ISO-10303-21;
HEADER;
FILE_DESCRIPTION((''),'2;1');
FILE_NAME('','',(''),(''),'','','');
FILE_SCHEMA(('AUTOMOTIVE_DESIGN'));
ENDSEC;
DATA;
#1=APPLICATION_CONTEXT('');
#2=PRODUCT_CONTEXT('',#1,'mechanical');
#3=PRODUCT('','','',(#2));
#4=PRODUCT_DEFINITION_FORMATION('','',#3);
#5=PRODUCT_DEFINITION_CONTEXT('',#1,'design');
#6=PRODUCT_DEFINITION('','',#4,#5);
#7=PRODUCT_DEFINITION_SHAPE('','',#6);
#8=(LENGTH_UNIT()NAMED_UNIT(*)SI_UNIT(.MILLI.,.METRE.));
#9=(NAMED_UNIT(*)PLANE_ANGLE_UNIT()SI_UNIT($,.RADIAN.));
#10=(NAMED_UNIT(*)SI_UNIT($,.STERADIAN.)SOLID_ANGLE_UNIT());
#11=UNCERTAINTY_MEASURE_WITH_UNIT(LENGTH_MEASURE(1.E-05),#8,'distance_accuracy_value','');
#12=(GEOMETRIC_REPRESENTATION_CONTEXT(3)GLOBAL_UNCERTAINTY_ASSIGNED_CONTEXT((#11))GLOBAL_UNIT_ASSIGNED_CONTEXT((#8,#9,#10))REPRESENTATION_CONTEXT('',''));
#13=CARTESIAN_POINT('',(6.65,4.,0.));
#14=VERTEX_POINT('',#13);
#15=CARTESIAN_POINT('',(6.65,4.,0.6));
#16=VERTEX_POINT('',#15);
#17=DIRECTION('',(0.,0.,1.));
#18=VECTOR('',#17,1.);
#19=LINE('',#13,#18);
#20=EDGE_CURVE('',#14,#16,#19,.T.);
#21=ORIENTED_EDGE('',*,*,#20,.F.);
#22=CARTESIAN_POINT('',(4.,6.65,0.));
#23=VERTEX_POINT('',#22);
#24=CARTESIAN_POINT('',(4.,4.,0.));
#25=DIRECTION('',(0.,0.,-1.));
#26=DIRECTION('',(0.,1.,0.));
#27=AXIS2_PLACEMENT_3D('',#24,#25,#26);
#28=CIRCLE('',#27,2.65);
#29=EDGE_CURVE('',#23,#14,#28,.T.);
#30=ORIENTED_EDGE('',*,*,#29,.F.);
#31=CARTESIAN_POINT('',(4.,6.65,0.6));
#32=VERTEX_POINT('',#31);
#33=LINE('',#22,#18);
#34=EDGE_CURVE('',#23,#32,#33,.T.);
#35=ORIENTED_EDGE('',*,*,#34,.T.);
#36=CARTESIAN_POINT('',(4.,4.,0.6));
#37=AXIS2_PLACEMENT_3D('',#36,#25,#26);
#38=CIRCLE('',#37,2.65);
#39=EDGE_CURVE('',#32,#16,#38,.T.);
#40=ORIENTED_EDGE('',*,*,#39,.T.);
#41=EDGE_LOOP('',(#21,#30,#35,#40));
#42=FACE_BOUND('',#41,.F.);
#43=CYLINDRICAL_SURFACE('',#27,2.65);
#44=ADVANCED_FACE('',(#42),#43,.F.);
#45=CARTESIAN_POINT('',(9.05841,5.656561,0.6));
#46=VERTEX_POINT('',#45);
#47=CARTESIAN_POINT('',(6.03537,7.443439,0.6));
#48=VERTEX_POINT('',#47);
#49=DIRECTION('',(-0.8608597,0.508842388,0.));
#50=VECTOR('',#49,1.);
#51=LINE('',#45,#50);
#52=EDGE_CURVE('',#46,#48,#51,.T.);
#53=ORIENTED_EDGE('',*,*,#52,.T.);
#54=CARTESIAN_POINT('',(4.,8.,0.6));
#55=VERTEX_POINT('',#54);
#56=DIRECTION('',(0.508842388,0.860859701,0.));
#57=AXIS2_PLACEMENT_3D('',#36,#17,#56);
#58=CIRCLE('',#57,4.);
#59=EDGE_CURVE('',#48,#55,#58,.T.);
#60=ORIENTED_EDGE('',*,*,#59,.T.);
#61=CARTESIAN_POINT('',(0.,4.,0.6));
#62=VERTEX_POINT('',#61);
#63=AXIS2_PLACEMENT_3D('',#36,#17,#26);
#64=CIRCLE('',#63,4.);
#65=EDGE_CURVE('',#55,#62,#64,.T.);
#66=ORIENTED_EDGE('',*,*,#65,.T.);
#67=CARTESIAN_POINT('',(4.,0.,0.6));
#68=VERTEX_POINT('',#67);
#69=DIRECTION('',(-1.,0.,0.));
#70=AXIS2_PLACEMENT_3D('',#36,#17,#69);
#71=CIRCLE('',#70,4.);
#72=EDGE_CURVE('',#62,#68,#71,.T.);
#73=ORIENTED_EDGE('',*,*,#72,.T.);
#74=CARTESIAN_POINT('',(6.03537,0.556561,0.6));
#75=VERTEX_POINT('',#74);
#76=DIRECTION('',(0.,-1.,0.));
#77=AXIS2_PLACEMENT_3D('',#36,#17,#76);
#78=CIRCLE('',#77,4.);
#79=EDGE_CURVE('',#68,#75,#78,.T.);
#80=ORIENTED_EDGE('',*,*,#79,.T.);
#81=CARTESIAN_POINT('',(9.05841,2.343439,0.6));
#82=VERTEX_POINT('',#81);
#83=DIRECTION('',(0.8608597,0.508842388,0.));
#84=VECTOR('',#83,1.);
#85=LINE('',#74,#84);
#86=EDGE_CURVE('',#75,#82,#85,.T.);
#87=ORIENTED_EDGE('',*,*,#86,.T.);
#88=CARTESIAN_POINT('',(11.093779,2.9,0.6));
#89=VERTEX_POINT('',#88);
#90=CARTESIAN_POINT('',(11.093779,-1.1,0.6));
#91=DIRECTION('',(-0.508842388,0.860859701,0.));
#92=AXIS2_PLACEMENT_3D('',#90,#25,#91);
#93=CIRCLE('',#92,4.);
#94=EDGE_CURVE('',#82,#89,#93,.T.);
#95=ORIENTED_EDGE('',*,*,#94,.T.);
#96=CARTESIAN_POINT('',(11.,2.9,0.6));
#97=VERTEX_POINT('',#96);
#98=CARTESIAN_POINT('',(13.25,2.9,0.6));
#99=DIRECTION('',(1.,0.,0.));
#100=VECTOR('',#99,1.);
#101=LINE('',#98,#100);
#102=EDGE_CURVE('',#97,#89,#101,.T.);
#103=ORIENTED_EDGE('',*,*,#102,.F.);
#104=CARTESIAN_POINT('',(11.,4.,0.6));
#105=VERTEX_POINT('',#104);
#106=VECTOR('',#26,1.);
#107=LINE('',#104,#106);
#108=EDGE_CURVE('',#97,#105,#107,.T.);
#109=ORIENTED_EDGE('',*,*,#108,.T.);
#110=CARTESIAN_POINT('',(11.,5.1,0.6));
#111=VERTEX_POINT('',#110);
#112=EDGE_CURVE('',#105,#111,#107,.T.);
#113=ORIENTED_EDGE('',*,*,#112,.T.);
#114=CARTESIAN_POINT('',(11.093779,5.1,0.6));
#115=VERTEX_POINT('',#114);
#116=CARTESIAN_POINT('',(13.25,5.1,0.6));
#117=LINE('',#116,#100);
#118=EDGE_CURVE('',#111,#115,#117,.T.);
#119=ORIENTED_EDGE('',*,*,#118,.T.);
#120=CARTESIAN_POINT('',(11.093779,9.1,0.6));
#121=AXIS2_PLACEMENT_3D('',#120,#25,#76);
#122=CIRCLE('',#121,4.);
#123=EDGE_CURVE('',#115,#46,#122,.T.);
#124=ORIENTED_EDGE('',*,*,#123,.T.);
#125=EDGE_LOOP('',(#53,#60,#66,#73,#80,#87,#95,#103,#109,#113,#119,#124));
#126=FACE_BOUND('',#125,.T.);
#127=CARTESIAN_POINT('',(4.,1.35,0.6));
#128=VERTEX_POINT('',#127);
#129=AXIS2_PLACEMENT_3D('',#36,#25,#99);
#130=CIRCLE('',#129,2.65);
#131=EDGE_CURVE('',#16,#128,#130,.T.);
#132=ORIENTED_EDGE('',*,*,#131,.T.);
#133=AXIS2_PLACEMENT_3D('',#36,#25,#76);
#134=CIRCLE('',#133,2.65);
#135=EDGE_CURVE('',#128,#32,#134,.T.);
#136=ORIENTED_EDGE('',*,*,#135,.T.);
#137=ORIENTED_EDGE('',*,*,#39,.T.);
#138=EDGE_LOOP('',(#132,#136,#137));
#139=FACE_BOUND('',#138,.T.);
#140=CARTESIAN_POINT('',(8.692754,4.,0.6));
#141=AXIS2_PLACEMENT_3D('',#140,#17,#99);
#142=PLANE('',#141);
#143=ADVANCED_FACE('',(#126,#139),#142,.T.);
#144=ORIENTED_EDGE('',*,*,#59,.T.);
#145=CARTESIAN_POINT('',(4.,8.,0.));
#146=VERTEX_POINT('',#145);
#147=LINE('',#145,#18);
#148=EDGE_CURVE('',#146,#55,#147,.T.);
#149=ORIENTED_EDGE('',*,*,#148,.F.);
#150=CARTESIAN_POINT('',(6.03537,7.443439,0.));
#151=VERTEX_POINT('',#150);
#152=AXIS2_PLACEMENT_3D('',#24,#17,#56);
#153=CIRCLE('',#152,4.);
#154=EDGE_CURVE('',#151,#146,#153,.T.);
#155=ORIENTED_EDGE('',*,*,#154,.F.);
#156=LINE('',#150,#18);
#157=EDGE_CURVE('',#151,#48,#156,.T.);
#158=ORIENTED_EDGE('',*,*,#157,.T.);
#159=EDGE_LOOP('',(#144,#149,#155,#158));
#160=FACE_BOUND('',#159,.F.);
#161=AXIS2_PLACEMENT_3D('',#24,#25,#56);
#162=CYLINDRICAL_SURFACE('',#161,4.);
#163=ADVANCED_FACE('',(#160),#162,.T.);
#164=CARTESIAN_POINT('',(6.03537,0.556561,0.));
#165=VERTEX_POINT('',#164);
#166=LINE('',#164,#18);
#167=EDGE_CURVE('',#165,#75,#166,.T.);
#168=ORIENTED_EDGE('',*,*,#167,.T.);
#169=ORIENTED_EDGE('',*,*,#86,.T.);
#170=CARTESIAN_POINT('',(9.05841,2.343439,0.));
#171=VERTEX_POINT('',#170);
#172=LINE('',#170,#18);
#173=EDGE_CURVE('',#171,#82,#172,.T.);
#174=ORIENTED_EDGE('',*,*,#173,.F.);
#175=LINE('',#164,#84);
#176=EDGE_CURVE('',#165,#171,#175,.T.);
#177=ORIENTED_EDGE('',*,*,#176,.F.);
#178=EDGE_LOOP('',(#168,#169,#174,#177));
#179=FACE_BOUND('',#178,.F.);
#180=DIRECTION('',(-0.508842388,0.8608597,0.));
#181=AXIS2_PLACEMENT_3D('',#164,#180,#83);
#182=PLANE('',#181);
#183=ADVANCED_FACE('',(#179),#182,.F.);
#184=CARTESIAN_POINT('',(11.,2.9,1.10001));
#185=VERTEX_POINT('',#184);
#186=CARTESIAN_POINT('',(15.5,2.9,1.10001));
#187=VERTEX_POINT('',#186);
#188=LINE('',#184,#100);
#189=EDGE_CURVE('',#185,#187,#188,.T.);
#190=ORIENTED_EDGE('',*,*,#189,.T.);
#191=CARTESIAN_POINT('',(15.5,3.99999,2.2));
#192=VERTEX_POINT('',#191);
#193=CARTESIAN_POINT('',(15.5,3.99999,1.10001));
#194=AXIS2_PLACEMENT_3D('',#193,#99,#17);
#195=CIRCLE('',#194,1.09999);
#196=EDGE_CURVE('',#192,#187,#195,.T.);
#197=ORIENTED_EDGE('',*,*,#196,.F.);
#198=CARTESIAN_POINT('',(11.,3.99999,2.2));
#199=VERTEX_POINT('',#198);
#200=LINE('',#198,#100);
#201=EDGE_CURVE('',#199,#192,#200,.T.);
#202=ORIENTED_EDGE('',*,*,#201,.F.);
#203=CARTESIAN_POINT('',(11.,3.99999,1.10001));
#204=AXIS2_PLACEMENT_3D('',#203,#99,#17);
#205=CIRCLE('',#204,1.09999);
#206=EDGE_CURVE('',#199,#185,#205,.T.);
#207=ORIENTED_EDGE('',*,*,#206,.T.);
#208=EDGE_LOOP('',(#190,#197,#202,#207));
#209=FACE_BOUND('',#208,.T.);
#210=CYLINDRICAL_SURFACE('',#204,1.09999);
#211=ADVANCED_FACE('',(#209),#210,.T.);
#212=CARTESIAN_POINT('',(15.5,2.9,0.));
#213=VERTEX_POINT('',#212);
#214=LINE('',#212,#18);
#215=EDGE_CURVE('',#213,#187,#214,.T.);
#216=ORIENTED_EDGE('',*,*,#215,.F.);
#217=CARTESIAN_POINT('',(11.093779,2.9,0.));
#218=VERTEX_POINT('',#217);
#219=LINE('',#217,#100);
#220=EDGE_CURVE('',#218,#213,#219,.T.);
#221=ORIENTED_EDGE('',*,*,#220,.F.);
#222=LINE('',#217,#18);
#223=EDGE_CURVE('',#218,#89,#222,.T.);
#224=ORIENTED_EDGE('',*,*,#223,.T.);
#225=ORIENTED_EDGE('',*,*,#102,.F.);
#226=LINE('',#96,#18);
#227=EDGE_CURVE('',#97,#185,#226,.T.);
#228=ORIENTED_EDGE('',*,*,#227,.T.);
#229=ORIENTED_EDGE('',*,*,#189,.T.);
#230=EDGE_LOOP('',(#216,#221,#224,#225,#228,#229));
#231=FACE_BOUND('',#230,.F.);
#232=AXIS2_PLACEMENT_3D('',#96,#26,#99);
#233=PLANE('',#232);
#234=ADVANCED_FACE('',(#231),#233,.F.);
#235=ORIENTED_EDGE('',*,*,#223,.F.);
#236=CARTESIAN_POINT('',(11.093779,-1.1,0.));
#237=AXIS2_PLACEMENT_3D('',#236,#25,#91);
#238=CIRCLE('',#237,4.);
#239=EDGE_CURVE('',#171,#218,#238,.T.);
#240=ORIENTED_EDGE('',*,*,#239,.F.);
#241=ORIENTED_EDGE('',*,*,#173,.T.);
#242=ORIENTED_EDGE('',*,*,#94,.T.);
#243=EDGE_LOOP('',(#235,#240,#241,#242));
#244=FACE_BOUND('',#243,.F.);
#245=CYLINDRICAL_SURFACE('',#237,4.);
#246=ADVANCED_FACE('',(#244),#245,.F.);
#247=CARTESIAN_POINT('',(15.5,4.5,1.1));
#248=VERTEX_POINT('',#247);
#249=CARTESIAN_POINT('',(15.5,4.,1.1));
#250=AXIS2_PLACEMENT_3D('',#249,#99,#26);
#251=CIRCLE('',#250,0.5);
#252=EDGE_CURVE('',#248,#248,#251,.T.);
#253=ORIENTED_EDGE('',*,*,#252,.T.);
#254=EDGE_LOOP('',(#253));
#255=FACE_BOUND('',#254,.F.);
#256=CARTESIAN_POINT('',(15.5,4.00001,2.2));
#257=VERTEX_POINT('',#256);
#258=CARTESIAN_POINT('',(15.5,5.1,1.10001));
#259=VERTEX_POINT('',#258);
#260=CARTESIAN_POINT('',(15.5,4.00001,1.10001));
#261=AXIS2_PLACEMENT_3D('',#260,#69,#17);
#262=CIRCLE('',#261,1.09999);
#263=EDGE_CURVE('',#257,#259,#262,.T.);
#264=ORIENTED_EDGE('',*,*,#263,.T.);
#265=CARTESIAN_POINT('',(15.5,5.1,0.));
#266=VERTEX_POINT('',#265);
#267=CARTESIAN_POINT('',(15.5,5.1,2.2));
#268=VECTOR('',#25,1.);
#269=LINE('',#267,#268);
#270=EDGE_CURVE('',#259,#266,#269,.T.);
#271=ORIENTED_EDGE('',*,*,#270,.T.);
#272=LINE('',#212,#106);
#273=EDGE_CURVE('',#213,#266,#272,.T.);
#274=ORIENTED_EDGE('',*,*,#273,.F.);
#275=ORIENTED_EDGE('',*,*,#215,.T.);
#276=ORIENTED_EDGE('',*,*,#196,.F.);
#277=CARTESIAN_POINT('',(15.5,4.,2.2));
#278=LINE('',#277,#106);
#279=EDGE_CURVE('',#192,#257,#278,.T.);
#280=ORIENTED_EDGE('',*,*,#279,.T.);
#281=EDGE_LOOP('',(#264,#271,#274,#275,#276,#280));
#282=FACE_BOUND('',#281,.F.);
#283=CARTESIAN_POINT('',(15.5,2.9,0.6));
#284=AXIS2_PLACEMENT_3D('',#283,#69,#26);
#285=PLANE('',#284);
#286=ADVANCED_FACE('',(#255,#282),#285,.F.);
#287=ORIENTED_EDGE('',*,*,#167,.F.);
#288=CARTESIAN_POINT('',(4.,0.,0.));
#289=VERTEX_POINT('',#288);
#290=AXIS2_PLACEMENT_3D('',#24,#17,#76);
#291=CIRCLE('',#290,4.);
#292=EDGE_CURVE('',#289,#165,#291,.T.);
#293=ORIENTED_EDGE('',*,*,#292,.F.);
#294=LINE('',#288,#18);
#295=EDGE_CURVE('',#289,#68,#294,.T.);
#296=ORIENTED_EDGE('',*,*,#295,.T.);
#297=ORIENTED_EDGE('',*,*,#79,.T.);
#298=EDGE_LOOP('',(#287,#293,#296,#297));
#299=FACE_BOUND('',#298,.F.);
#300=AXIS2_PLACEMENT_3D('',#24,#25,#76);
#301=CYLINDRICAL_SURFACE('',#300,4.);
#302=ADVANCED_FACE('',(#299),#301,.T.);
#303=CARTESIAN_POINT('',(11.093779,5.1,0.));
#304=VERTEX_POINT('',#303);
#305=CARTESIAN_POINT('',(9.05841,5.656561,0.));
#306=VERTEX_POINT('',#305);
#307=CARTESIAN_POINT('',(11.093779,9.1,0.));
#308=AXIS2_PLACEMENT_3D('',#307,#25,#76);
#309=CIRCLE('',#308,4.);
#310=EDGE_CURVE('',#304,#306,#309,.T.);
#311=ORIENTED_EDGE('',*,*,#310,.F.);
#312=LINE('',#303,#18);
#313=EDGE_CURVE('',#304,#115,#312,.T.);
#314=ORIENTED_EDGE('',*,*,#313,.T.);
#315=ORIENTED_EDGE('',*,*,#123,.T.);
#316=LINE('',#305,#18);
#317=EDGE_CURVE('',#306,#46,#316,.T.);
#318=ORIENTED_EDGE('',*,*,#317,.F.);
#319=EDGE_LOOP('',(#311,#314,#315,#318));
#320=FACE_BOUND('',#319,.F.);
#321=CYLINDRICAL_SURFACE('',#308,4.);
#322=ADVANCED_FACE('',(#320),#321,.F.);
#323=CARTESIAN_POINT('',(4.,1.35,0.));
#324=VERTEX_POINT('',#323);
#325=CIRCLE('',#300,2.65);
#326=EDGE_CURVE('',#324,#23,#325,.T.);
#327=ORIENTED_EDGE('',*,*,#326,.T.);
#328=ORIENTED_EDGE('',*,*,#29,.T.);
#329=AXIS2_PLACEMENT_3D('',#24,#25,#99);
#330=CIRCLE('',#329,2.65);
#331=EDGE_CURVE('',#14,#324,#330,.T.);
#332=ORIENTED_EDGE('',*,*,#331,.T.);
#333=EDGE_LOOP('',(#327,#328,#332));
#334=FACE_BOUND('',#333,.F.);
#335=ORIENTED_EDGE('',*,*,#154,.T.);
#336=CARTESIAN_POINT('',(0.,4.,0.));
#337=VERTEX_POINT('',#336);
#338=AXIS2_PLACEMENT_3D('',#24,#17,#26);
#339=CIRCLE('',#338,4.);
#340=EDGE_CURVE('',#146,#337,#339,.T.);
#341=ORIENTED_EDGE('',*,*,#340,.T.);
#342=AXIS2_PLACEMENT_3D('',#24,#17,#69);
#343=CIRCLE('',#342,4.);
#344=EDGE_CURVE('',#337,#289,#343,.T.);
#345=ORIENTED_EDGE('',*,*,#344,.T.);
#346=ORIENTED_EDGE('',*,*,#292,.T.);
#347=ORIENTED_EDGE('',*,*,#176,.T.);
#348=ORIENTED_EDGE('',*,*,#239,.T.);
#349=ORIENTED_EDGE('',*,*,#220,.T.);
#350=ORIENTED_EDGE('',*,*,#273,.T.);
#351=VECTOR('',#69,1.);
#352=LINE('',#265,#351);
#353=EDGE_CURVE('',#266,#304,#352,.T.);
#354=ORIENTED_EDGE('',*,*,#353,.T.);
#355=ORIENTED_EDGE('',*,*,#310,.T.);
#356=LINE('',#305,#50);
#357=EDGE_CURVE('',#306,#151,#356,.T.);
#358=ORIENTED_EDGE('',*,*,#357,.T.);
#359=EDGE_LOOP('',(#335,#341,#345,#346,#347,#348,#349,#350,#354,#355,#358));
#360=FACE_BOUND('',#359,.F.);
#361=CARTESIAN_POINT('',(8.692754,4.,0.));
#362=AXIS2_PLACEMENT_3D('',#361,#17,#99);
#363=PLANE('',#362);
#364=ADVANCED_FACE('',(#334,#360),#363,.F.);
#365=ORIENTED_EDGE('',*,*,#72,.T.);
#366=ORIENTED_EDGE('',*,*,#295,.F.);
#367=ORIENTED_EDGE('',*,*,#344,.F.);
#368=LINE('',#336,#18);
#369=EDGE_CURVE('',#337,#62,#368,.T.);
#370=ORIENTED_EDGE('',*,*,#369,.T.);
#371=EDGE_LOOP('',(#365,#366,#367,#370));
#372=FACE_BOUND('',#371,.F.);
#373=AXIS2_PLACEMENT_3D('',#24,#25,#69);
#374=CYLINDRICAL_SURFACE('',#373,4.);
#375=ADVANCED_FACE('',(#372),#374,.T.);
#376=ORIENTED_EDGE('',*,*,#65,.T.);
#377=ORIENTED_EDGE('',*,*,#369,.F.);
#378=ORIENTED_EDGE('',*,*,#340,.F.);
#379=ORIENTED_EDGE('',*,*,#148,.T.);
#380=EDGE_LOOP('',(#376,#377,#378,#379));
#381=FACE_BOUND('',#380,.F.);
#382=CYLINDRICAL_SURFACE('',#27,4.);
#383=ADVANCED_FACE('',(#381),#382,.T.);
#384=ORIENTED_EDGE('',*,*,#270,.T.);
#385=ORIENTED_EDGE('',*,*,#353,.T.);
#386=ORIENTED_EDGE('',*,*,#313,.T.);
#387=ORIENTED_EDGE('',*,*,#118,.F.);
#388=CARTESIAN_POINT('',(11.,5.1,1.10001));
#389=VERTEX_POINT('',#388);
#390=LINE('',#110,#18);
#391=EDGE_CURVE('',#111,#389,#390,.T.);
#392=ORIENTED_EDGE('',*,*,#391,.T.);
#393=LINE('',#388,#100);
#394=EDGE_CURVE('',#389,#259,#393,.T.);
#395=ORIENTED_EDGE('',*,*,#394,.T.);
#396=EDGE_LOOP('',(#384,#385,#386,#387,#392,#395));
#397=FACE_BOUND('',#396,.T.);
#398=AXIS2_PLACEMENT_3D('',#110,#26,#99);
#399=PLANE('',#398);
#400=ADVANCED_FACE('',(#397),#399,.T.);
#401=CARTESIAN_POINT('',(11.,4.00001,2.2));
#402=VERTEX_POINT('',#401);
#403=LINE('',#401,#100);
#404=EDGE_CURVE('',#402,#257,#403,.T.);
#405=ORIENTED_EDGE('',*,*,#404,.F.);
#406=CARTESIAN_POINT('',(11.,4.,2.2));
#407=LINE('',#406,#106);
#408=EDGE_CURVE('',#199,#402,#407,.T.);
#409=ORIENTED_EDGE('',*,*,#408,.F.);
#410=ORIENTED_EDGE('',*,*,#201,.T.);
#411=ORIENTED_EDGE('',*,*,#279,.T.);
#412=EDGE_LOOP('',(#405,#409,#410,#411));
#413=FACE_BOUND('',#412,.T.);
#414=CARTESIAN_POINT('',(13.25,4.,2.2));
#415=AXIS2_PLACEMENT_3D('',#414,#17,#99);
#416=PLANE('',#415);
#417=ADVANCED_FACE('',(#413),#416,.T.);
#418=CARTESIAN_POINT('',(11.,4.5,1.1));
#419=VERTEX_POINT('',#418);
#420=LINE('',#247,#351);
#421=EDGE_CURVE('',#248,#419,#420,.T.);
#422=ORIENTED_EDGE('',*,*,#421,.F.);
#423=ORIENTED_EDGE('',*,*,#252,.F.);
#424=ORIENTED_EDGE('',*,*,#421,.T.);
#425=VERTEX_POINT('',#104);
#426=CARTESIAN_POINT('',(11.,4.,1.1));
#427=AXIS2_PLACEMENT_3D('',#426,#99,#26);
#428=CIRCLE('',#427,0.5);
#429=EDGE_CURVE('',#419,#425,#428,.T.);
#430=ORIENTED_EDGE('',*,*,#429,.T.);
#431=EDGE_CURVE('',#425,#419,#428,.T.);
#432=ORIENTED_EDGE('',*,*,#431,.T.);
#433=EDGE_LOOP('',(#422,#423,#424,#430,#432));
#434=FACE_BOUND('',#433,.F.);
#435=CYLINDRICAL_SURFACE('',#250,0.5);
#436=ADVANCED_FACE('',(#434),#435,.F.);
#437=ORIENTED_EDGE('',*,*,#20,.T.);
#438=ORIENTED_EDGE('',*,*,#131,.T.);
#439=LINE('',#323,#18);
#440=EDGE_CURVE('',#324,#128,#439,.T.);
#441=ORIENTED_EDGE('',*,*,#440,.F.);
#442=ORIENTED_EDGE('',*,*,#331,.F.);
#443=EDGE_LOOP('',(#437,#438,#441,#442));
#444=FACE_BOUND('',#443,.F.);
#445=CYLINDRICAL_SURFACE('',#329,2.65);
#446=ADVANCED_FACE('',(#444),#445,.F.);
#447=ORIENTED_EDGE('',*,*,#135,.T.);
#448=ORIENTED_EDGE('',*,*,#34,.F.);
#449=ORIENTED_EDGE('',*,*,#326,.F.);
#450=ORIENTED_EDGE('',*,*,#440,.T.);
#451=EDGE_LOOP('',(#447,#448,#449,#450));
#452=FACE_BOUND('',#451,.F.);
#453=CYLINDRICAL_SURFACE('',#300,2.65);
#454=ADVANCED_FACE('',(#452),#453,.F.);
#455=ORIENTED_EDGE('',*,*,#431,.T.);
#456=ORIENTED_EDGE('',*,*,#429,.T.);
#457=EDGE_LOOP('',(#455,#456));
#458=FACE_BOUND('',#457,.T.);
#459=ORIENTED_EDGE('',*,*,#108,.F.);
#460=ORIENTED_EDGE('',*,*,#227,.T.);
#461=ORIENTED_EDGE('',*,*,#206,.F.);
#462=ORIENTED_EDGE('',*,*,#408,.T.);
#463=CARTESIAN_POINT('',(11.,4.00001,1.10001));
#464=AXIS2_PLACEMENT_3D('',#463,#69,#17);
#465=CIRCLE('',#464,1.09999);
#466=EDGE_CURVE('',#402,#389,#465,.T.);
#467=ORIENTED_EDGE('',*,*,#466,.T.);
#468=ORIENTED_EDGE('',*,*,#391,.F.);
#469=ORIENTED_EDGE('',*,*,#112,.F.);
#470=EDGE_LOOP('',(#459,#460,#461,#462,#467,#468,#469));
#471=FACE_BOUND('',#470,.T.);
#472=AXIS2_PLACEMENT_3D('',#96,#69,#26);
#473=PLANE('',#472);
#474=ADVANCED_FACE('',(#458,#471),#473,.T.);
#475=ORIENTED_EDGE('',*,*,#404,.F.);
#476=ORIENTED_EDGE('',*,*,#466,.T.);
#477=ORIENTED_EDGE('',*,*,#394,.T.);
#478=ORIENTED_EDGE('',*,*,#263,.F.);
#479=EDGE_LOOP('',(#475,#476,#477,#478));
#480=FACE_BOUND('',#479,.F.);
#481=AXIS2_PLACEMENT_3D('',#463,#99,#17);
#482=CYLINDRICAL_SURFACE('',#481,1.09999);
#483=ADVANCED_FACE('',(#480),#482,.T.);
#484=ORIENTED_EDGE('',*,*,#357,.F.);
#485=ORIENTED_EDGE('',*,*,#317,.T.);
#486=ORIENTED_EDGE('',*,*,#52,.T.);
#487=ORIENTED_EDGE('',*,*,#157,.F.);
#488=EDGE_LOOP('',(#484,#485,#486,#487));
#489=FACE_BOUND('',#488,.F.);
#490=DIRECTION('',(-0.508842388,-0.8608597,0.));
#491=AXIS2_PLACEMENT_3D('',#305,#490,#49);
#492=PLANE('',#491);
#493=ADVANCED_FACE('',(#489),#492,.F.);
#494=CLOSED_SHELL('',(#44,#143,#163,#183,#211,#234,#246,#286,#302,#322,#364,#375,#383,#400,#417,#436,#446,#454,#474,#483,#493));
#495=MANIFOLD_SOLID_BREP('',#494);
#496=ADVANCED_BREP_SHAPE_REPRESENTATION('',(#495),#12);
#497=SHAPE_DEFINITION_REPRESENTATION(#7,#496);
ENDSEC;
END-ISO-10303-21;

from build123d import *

# Parameters (mm, degrees)
F1_DEPTH = 0.6
F2_W     = 4.5
F2_H     = 2.2
F3_DEPTH = 1.6
F4_R     = 1.09999
F5_R     = 0.5
F6_DEPTH = 25


# Not quite as in the source:
# - a fillet or chamfer is up to 0.001 mm smaller than in the source, because OpenCascade refuses the exact size


with BuildPart() as f1:
    # F0 (on Top) → F1 (new body)
    with BuildSketch(Plane.XY):
        with BuildLine():
            Line((11.0937791562, 2.9), (15.5, 2.9))
            Line((15.5, 2.9), (15.5, 5.1))
            Line((15.5, 5.1), (11.0937791562, 5.1))
            ThreePointArc((11.0937791562, 5.1), (10.0387329979, 5.2416483307), (9.0584096032, 5.656561198))
            Line((9.0584096032, 5.656561198), (6.035369553, 7.443438802))
            ThreePointArc((6.035369553, 7.443438802), (5.0550461583, 7.8583516693), (4, 8))
            Line((4, 8), (4, 6.65))
            ThreePointArc((4, 6.65), (5.8738329701, 5.8738329701), (6.65, 4))
            ThreePointArc((6.65, 4), (5.8738329701, 2.1261670299), (4, 1.35))
            Line((4, 1.35), (4, 0))
            ThreePointArc((4, 0), (5.0550461583, 0.1416483307), (6.035369553, 0.556561198))
            Line((6.035369553, 0.556561198), (9.0584096032, 2.343438802))
            ThreePointArc((9.0584096032, 2.343438802), (10.0387329979, 2.7583516693), (11.0937791562, 2.9))
        make_face()
        with BuildLine():
            ThreePointArc((0, 4), (1.1715728753, 1.1715728753), (4, 0))
            Line((4, 0), (4, 1.35))
            ThreePointArc((4, 1.35), (1.35, 4), (4, 6.65))
            Line((4, 6.65), (4, 8))
            ThreePointArc((4, 8), (1.1715728753, 6.8284271247), (0, 4))
        make_face()
    extrude(amount=F1_DEPTH)

    # F2 (on face) → F3 (join)
    with BuildSketch(Plane.XY.offset(0.6)):
        with Locations((13.25, 4)):
            Rectangle(F2_W, F2_H)
    extrude(amount=F3_DEPTH)

    # F4 (radius 1.1 in the source; OpenCascade refuses exactly that, so slightly less here)
    f4_edges = [f1.edges().sort_by_distance(p)[0] for p in [
        (13.25, 5.1, 2.2),
        (13.25, 2.9, 2.2),
    ]]
    fillet(f4_edges, radius=F4_R)

    # F5 (on face) → F6 (cut)
    with BuildSketch(Plane.YZ.offset(15.5)):
        with Locations((4, 1.1)):
            Circle(F5_R)
    extrude(amount=-F6_DEPTH, mode=Mode.SUBTRACT)


solid = f1.part
